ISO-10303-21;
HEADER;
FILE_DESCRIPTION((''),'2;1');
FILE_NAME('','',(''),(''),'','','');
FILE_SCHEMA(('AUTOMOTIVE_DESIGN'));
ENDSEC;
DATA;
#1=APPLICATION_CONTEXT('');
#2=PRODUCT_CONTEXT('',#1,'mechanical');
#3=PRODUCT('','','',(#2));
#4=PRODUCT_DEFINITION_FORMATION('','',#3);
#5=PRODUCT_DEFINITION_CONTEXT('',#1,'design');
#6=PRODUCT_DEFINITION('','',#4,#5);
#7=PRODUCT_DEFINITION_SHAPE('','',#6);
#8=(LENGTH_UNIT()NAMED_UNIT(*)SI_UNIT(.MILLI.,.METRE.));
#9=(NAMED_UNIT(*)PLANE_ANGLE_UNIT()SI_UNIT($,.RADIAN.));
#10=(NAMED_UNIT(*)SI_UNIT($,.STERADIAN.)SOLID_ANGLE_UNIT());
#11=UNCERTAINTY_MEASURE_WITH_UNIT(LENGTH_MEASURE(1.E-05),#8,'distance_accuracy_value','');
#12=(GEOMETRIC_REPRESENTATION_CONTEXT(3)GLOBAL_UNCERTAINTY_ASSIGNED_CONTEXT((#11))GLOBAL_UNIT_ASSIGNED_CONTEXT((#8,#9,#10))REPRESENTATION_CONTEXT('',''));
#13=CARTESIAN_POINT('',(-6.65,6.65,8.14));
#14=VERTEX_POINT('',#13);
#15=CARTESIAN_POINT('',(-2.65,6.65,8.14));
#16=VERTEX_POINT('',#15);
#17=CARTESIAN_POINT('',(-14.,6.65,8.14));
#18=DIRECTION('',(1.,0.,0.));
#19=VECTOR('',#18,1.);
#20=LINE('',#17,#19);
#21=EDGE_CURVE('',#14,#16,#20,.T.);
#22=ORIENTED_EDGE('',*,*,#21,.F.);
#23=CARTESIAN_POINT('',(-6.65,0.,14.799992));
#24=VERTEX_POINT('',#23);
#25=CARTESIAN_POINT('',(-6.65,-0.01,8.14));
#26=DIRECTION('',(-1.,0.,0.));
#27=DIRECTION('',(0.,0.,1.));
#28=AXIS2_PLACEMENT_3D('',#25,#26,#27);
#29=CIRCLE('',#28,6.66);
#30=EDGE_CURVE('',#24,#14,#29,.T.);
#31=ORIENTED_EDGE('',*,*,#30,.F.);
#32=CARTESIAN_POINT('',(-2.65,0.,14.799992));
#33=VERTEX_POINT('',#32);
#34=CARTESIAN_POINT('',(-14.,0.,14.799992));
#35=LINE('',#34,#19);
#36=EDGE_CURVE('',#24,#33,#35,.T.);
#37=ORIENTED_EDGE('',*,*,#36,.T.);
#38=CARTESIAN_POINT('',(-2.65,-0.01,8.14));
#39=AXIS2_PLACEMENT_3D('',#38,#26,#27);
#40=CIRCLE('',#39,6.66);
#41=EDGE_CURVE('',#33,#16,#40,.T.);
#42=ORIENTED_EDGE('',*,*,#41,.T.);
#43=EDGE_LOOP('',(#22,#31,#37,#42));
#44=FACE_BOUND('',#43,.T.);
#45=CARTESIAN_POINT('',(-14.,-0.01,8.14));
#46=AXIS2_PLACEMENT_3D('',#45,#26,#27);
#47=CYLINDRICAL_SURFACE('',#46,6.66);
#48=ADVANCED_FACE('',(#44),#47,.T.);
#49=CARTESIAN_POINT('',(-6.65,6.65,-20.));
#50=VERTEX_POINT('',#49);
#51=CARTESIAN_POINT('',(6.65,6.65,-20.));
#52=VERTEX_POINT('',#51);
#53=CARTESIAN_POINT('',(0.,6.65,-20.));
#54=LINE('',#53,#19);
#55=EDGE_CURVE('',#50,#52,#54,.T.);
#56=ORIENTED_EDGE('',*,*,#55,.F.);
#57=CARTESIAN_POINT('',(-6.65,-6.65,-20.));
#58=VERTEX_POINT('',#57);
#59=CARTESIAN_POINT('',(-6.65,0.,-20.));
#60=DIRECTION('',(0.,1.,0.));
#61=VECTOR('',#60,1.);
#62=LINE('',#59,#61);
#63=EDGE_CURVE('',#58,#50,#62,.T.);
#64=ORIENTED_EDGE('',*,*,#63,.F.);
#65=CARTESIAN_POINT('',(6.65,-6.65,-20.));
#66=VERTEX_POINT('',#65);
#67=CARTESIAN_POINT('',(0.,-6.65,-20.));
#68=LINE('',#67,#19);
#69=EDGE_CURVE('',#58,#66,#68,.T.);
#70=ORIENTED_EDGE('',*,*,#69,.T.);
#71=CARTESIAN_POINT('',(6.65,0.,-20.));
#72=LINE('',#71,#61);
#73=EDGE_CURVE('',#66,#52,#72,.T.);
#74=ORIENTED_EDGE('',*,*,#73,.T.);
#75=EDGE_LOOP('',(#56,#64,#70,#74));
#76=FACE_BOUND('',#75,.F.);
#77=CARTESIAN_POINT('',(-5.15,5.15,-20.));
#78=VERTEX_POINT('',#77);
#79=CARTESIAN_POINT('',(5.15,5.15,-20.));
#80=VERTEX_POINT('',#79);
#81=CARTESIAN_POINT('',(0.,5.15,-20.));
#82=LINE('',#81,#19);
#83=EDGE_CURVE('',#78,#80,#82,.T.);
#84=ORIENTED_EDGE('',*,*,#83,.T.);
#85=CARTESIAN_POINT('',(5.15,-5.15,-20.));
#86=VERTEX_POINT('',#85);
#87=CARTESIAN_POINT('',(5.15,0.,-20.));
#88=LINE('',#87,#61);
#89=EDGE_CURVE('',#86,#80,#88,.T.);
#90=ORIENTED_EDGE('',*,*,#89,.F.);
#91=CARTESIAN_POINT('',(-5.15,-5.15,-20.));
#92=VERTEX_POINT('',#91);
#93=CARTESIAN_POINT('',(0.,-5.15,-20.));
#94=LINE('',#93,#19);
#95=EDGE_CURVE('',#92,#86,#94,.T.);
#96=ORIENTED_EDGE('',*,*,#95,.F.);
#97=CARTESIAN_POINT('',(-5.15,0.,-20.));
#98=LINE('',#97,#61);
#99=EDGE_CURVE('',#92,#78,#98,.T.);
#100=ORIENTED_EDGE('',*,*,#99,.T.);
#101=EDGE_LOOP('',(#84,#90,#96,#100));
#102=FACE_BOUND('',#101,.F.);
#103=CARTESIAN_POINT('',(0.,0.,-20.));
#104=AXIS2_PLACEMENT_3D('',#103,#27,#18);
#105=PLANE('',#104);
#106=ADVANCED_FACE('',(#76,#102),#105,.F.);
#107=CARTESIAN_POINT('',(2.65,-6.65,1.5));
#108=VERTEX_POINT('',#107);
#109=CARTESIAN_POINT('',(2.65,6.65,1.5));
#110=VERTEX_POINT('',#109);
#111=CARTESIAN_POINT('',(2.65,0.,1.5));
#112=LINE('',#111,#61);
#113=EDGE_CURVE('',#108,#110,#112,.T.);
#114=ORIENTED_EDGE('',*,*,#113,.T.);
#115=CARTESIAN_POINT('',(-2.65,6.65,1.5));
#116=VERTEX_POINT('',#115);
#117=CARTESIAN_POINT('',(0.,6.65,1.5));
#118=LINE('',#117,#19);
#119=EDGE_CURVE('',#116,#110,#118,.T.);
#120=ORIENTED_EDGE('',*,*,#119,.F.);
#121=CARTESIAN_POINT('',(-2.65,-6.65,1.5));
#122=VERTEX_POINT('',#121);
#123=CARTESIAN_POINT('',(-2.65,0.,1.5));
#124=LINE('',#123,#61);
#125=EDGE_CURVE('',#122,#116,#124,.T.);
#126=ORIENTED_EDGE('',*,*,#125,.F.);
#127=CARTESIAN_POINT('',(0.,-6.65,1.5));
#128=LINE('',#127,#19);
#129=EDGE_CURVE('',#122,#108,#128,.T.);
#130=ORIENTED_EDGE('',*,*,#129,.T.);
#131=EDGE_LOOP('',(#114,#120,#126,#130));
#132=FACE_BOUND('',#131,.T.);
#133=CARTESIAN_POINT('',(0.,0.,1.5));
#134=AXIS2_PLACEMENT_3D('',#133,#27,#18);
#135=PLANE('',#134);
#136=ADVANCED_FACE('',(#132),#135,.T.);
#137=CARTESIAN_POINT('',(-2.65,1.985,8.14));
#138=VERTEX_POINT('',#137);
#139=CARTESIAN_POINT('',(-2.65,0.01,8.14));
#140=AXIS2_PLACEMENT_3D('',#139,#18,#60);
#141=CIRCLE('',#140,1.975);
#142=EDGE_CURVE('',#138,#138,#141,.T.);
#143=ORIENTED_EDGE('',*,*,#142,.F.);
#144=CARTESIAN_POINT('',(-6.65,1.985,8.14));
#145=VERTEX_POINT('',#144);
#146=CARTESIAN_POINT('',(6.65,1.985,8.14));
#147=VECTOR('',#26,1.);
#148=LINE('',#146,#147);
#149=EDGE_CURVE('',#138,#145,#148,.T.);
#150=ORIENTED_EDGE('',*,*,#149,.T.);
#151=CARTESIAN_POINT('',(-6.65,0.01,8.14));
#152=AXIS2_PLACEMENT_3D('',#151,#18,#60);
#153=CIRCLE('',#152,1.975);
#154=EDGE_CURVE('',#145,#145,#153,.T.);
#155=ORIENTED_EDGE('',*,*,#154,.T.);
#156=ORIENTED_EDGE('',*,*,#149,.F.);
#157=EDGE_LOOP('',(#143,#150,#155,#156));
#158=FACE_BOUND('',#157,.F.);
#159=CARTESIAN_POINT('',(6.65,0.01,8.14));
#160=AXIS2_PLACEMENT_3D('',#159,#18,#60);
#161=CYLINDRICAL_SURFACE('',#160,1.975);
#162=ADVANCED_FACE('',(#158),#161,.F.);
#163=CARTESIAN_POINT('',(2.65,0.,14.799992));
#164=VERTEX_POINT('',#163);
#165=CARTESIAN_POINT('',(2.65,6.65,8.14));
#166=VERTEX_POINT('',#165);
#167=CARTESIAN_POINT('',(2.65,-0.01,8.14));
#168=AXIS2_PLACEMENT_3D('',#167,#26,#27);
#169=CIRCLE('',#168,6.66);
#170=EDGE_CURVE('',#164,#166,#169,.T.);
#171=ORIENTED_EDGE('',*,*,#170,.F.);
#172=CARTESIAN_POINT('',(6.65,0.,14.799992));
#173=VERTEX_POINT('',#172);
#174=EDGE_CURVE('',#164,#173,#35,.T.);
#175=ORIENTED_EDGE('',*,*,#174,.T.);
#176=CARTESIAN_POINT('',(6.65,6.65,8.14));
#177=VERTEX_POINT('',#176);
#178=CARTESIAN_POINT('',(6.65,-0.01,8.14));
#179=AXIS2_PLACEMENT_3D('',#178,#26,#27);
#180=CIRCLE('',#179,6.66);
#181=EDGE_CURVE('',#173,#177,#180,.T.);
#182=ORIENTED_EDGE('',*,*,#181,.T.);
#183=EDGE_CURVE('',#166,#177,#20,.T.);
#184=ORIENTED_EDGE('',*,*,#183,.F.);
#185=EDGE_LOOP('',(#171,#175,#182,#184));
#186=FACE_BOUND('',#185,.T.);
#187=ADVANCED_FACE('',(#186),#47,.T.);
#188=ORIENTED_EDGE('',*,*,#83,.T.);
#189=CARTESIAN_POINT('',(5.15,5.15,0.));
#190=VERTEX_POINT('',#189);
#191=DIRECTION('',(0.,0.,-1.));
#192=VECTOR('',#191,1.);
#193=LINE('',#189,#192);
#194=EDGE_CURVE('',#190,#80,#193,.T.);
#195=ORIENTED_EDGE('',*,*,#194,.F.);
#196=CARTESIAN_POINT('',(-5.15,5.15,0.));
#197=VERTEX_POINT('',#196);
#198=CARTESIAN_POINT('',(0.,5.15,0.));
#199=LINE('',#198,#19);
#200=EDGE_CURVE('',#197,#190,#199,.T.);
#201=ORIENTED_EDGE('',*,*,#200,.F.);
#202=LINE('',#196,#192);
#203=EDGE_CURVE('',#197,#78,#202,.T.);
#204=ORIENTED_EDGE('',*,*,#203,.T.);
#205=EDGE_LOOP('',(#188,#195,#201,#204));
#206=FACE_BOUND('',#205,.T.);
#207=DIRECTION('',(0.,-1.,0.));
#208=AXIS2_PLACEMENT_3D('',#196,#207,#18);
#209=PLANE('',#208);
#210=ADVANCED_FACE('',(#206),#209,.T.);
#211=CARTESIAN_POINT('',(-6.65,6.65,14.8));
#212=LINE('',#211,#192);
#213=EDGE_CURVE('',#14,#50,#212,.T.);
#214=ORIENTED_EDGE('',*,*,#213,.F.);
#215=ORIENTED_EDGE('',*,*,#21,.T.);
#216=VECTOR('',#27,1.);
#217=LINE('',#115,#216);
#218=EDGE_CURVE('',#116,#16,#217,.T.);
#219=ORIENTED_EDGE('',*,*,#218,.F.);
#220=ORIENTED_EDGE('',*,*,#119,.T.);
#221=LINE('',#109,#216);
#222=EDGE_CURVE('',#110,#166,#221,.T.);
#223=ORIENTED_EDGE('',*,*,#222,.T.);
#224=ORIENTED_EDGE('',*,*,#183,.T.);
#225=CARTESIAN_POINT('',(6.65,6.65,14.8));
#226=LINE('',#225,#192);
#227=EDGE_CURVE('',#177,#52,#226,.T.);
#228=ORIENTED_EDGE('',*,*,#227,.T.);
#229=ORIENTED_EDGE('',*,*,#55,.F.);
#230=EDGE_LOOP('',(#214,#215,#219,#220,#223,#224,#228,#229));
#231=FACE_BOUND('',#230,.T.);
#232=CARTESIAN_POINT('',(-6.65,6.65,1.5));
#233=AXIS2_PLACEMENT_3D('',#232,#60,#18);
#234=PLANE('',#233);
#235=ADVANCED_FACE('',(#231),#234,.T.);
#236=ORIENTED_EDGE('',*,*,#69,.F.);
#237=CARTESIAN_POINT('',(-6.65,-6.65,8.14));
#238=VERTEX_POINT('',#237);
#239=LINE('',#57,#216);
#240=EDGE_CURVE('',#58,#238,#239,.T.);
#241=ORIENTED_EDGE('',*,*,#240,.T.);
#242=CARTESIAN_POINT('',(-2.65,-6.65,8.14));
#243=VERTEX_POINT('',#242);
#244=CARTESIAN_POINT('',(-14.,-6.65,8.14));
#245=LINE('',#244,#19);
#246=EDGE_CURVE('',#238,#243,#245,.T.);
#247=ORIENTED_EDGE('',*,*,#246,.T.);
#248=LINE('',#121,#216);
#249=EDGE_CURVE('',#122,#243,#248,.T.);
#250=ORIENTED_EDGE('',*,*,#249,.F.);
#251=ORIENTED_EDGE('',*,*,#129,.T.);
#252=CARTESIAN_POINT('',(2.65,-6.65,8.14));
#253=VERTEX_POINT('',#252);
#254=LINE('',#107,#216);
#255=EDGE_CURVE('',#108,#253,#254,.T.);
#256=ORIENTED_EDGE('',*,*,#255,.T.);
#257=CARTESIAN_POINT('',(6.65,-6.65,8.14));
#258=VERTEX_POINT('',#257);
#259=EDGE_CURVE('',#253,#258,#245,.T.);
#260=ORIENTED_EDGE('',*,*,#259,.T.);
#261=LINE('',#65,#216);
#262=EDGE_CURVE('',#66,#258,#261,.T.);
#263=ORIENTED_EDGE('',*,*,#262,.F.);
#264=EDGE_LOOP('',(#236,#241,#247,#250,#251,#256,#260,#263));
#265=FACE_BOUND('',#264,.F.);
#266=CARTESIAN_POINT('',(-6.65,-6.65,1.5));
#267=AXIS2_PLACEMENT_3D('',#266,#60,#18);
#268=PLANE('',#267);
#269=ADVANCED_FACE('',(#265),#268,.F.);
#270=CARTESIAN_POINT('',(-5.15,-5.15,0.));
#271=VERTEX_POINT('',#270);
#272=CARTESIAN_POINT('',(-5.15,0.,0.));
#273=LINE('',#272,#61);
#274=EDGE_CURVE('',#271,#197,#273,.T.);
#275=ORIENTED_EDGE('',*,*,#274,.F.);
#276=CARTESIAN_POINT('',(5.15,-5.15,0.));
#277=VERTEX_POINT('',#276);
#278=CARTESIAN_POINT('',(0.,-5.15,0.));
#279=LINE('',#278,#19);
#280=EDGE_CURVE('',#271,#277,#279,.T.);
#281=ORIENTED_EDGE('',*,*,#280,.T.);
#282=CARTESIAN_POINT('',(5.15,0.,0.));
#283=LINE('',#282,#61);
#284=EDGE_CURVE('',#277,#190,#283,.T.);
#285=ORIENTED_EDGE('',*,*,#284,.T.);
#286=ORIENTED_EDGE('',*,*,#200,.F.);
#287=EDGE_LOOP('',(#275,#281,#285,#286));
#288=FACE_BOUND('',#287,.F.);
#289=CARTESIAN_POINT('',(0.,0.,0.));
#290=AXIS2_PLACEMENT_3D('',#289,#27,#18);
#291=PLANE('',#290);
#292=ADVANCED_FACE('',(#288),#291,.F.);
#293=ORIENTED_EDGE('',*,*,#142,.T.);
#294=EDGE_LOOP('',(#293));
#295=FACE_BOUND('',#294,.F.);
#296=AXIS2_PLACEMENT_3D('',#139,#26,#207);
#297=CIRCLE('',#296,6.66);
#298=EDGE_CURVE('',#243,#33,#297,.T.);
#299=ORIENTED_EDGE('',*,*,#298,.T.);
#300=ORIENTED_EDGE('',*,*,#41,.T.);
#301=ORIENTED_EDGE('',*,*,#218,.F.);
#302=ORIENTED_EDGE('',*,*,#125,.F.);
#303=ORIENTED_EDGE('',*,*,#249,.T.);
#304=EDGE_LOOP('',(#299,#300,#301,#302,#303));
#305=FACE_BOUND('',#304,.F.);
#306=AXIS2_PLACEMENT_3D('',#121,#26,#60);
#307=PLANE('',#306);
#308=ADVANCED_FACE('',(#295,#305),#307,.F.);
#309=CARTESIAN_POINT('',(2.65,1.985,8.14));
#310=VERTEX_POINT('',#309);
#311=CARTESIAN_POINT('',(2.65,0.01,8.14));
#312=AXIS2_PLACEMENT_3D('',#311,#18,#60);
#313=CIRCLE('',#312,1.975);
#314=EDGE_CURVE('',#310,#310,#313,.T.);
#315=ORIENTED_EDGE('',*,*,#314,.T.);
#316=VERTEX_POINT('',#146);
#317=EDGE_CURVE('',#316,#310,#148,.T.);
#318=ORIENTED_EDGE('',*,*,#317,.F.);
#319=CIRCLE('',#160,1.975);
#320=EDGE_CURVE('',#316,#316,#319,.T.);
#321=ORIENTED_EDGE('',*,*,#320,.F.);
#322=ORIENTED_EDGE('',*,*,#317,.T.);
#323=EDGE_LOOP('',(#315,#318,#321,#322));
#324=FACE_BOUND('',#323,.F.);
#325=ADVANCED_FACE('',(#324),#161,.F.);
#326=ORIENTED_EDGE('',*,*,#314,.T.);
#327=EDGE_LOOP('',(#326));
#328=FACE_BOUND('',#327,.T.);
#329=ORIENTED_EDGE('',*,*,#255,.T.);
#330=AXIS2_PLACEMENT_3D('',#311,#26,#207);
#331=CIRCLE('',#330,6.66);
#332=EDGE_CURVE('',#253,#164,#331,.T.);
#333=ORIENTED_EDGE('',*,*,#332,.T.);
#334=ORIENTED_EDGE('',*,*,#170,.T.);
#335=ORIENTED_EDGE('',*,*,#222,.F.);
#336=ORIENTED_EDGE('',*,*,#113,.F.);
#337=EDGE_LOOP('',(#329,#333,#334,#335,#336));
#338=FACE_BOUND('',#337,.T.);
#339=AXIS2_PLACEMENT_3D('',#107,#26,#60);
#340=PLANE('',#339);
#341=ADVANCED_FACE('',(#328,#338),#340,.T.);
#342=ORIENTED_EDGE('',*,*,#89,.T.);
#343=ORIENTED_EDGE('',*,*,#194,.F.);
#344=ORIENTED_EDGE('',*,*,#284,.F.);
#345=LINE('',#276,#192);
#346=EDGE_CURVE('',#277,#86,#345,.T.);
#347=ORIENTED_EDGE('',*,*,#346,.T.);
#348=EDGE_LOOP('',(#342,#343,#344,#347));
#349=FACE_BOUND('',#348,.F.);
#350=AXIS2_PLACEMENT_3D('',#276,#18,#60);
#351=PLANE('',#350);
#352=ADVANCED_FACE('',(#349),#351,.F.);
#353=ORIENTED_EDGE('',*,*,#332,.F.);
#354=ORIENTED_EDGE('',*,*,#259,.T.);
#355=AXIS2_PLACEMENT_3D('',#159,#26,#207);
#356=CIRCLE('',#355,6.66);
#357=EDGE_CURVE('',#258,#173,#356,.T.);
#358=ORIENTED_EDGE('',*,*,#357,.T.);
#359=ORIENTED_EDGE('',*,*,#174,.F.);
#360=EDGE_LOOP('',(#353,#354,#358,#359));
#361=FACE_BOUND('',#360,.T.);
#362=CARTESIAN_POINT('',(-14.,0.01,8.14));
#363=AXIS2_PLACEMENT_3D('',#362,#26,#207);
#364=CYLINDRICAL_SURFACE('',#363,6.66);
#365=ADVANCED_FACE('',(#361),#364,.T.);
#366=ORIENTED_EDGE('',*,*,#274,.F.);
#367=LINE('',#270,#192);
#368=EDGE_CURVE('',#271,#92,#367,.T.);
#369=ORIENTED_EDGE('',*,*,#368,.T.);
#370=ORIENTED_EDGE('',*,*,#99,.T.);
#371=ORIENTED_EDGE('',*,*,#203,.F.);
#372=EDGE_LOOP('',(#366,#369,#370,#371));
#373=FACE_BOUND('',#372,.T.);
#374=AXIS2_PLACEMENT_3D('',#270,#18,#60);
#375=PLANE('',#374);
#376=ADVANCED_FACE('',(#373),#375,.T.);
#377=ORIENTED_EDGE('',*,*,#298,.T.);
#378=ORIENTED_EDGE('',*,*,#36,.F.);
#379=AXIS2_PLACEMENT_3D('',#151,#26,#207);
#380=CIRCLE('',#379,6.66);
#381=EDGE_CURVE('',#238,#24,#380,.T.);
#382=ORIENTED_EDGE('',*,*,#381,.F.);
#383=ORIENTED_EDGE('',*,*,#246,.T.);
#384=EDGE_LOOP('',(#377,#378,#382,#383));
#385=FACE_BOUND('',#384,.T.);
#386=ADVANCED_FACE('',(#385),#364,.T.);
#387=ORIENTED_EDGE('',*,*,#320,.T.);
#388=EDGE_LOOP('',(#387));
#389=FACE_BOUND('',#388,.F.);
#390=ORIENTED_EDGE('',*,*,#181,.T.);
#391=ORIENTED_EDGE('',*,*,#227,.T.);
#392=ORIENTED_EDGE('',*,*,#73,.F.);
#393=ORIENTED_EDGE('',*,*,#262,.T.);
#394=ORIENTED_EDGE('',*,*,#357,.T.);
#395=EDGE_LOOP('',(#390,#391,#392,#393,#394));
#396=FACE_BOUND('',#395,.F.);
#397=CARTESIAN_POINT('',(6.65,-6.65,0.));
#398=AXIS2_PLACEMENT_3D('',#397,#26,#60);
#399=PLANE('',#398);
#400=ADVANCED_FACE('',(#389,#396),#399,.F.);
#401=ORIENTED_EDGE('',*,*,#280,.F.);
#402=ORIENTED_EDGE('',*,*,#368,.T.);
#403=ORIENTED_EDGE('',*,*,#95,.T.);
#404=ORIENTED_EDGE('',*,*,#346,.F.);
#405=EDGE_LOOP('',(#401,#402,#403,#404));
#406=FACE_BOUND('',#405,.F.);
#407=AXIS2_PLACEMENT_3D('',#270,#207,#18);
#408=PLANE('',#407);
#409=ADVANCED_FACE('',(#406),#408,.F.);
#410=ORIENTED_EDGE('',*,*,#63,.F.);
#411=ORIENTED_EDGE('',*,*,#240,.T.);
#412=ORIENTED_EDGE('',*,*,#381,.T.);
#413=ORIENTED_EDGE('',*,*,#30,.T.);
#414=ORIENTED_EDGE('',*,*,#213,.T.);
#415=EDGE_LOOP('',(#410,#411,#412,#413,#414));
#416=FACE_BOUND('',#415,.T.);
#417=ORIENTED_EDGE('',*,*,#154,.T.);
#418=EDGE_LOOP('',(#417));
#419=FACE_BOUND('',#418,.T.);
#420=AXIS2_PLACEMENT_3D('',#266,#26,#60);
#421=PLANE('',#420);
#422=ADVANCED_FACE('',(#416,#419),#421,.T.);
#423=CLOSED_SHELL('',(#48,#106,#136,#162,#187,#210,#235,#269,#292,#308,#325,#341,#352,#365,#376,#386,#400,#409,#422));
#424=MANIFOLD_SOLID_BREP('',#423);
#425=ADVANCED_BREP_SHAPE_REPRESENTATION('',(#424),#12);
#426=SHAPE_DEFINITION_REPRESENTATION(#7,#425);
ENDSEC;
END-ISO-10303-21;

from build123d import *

# Parameters (mm, degrees)
F0_W          = 13.3
F0_H          = 13.3
F0_W_2        = 10.3
F0_H_2        = 10.3
F1_DEPTH      = 20
F2_DEPTH      = 1.5
F3_W          = 4
F3_H          = 13.3
F4_DEPTH      = 13.3
F5_T1_DEPTH   = 37.3
F5_T3_DEPTH   = 37.3
F6_R          = 1.975
F7_DEPTH      = 25
F7_DEPTH_BACK = 25


# Not quite as in the source:
# - a fillet or chamfer that OpenCascade refuses, or shapes differently, is made with other operations: its cross-section is extruded or revolved along the edge and cut away or added


with BuildPart() as f1:
    # F0 (on Top) → F1 (new body)
    with BuildSketch(Plane.XY):
        Rectangle(F0_W, F0_H)
        Rectangle(F0_W_2, F0_H_2, mode=Mode.SUBTRACT)
    extrude(amount=-F1_DEPTH)

    # F0 (on Top) → F2 (join)
    with BuildSketch(Plane.XY):
        Rectangle(F0_W, F0_H)
        Rectangle(F0_W_2, F0_H_2, mode=Mode.SUBTRACT)
        Rectangle(F0_W_2, F0_H_2)
    extrude(amount=F2_DEPTH)

    # F3 (on face) → F4 (join)
    with BuildSketch(Plane.XY.offset(1.5)):
        with Locations((-4.65, 0)):
            Rectangle(F3_W, F3_H)
        with Locations((4.65, 0)):
            Rectangle(F3_W, F3_H)
    extrude(amount=F4_DEPTH)

    # F5: fillet of radius 6.66 on 4 edges, made by hand

    # F5_s2 → F5_t1 (cut)
    with BuildSketch(Plane.YZ.offset(-14)):
        with BuildLine():
            ThreePointArc((-0.01, 14.8), (4.6993311627, 12.8493311627), (6.65, 8.14))
            Line((6.65, 8.14), (6.65, 14.8))
            Line((6.65, 14.8), (-0.01, 14.8))
        make_face()
        with BuildLine():
            ThreePointArc((-6.65, 8.14), (-4.6993311627, 12.8493311627), (0.01, 14.8))
            Line((0.01, 14.8), (-6.65, 14.8))
            Line((-6.65, 14.8), (-6.65, 8.14))
        make_face()
    extrude(amount=F5_T1_DEPTH, mode=Mode.SUBTRACT)

    # F5_s4 → F5_t3 (cut)
    with BuildSketch(Plane.YZ.offset(-23.3)):
        with BuildLine():
            ThreePointArc((-0.01, 14.8), (4.6993311627, 12.8493311627), (6.65, 8.14))
            Line((6.65, 8.14), (6.65, 14.8))
            Line((6.65, 14.8), (-0.01, 14.8))
        make_face()
        with BuildLine():
            ThreePointArc((-6.65, 8.14), (-4.6993311627, 12.8493311627), (0.01, 14.8))
            Line((0.01, 14.8), (-6.65, 14.8))
            Line((-6.65, 14.8), (-6.65, 8.14))
        make_face()
    extrude(amount=F5_T3_DEPTH, mode=Mode.SUBTRACT)

    # F6 (on face) → F7 (cut, two sides)
    with BuildSketch(Plane.YZ.offset(6.65)) as f7_sk:
        with Locations((0.01, 8.14)):
            Circle(F6_R)
    extrude(amount=-F7_DEPTH, mode=Mode.SUBTRACT)
    extrude(f7_sk.sketch, amount=F7_DEPTH_BACK, mode=Mode.SUBTRACT)


solid = f1.part
